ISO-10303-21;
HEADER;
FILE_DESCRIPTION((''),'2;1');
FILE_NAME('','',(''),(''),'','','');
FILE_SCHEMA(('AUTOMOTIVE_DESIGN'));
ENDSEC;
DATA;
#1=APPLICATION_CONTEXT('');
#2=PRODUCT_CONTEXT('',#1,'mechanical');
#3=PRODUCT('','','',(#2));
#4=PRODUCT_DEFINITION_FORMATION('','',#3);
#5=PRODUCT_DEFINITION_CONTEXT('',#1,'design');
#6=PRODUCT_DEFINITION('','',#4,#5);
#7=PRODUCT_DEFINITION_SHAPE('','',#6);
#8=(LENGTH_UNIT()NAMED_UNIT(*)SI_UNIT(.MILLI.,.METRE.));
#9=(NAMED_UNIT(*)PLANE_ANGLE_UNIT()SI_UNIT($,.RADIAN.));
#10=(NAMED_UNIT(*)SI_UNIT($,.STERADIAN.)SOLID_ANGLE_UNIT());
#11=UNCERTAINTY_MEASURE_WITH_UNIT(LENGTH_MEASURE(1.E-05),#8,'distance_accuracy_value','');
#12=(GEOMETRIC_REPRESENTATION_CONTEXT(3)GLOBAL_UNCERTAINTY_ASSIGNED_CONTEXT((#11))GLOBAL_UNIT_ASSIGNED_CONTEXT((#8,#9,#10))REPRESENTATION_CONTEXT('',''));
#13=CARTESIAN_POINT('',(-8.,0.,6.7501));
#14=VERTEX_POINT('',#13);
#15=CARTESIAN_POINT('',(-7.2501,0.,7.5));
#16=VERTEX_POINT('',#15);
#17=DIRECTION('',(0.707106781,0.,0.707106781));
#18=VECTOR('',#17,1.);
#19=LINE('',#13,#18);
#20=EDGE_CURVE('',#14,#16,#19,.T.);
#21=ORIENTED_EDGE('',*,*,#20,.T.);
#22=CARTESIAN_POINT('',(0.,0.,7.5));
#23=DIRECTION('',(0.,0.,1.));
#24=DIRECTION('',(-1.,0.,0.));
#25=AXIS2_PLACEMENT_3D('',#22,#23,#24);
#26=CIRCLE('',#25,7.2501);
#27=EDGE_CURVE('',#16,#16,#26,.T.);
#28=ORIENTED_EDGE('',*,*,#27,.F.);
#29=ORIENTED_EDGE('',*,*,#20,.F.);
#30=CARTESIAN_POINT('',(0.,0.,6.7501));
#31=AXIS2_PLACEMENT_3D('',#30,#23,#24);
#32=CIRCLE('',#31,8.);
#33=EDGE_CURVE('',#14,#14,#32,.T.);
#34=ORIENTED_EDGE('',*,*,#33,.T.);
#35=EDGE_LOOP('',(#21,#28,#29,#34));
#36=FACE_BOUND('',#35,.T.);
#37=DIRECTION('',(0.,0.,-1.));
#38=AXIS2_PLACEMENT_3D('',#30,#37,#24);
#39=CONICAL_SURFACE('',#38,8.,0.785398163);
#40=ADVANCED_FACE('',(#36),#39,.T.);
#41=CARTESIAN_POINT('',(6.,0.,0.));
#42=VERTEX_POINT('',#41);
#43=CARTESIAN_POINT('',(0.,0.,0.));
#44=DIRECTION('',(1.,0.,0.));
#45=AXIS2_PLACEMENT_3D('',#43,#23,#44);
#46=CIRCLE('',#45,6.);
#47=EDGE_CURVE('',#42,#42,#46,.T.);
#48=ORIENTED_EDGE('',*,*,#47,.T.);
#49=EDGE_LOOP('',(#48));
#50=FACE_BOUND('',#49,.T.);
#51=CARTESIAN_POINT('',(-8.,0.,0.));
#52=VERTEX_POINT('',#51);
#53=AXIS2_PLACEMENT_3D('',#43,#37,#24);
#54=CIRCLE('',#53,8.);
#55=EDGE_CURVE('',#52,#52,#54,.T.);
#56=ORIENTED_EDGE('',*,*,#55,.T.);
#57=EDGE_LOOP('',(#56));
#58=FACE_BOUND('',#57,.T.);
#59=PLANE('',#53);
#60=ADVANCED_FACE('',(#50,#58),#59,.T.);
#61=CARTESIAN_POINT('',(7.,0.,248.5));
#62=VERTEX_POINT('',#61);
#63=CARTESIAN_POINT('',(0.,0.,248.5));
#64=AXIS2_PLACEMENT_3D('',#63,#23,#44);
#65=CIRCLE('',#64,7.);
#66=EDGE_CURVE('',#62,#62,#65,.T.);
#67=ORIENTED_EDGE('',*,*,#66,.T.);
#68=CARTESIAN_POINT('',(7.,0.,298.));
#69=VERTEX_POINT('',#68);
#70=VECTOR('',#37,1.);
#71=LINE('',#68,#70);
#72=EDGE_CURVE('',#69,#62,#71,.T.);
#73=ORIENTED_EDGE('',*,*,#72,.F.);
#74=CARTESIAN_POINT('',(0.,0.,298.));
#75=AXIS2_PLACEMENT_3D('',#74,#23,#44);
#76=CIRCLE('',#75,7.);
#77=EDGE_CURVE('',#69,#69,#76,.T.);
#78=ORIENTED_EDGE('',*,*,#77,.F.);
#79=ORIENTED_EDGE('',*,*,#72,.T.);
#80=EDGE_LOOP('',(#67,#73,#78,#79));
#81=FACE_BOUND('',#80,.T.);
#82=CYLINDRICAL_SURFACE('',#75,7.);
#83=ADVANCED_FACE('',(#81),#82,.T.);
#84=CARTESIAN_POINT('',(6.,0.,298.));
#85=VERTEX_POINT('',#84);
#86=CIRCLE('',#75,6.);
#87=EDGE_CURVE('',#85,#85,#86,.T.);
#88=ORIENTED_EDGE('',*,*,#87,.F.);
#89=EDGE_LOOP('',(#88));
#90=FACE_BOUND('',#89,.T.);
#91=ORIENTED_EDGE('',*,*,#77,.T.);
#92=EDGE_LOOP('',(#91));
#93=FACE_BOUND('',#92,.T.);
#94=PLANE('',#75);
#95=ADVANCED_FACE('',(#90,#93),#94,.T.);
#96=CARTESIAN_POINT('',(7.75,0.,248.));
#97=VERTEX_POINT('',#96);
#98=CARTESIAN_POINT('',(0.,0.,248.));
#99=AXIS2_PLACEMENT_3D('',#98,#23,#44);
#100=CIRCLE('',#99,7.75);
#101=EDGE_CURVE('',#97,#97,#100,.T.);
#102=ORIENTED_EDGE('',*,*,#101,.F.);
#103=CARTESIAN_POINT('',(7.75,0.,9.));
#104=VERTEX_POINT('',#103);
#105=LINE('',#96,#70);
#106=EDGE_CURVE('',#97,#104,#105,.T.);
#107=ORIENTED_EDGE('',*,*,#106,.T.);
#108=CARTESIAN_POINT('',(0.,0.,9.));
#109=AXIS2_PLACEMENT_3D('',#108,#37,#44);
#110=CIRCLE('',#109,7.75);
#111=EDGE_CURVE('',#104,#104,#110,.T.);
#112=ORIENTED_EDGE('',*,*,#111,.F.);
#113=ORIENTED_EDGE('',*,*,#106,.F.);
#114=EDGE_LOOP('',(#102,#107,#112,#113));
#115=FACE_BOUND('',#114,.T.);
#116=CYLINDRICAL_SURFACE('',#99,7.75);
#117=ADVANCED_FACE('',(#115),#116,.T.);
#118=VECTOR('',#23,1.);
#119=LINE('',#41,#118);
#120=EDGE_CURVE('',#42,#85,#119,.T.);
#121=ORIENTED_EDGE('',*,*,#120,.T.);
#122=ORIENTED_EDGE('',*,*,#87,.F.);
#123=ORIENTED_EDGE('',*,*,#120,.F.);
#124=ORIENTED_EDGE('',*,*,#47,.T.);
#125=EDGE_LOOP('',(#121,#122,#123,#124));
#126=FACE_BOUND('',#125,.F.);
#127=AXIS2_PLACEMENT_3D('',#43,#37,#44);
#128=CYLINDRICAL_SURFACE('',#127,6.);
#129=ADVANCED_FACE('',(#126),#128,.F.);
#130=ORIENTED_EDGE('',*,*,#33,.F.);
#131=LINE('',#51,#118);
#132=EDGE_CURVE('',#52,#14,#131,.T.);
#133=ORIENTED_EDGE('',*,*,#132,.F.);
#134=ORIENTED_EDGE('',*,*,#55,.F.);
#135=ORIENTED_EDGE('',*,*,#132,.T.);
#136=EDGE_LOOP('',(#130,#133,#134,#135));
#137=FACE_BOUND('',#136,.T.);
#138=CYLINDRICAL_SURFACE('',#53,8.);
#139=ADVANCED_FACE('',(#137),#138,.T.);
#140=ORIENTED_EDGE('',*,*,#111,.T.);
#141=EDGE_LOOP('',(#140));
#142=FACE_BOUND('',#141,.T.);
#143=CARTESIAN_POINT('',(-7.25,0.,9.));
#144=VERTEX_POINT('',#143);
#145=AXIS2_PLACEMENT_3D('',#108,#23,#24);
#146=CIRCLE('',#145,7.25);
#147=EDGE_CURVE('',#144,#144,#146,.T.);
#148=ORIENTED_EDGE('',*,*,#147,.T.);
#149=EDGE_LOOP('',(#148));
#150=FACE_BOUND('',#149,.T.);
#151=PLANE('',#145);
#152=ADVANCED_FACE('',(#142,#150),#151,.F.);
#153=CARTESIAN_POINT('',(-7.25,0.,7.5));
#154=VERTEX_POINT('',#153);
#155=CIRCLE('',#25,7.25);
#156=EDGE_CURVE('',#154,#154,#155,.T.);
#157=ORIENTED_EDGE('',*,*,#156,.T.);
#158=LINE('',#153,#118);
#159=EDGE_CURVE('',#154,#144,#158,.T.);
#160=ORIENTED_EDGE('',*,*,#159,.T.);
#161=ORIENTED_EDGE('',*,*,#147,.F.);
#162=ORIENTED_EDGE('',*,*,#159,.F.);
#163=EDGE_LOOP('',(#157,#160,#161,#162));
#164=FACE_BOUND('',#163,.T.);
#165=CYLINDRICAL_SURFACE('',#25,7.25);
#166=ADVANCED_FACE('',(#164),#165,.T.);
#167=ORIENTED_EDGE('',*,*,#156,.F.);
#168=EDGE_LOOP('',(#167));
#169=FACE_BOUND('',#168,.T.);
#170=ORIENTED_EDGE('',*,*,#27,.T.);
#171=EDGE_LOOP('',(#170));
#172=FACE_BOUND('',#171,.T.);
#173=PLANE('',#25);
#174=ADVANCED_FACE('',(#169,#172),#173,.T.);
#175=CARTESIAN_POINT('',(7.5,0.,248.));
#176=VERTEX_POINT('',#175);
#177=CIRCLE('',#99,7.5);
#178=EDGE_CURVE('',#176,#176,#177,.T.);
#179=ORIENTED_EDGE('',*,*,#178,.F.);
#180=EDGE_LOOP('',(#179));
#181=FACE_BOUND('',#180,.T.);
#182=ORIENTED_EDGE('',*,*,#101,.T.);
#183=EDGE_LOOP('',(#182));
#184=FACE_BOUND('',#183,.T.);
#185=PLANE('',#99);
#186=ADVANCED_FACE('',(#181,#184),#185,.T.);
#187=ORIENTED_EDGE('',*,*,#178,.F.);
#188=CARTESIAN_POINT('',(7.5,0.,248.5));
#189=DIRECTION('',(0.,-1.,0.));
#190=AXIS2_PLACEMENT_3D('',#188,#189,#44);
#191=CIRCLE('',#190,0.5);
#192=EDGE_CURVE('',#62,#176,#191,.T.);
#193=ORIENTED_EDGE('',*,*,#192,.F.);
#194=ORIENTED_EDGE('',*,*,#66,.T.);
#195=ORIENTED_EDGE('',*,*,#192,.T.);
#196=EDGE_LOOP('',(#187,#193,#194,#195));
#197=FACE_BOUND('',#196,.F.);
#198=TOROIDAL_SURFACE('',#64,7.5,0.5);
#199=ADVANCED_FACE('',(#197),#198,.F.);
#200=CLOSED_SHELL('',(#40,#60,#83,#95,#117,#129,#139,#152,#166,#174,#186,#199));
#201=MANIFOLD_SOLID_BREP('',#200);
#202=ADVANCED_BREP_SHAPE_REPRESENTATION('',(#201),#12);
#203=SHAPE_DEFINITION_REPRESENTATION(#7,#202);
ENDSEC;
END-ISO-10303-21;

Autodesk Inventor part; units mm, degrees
ref_plane "YZ Plane" through (0, 0, 0) normal (1, 0, 0) x (0, 1, 0)
ref_plane "XZ Plane" through (0, 0, 0) normal (0, 1, 0) x (-1, 0, 0)
ref_plane "XY Plane" through (0, 0, 0) normal (0, 0, 1) x (1, 0, 0)
sketch "Skizze1" plane through (0, 0, 0) normal (0, 0, 1) x (1, 0, 0)
  circle A0 centre (0, 0) radius 8
  circle A1 centre (0, 0) radius 6
  dimension "d0" = 2
  dimension "d1" = 16
extrude "Extrusion1" add sketch "Skizze1" along normal blind 298
sketch "Skizze2" plane through (0, 0, 298) normal (0, 0, 1) x (1, 0, 0)
  circle A0 centre (0, 0) radius 8 projected
  circle A1 centre (0, 0) radius 7
  dimension "d4" = 14
extrude "Extrusion2" cut sketch "Skizze2" against normal blind 50
sketch "Skizze3" plane through (0, 0, 248) normal (0, 0, 1) x (1, 0, 0)
  circle A0 centre (0, 0) radius 8 projected
  circle A1 centre (0, 0) radius 7.75
  dimension "d7" = 15.5
extrude "Extrusion3" cut sketch "Skizze3" against normal through all
sketch "Skizze4" plane through (0, 0, 0) normal (0, 0, -1) x (-1, 0, 0)
  circle A0 centre (0, 0) radius 7.75 projected
  circle A1 centre (0, 0) radius 6 projected
  circle A2 centre (0, 0) radius 8
  dimension "d10" = 16
extrude "Extrusion4" add sketch "Skizze4" against normal blind 9 contours A2
sketch "Skizze5" plane through (0, 0, 0) normal (0, 1, 0) x (-1, 0, 0)
  line L0 (-8, 9) -> (8, 9) projected
  line L1 (8, 0) -> (-8, 0) projected
  line L2 (8, 0) -> (8, 9) projected
  line L3 (6, 0) -> (6, 298) projected
  line L4 (7.75, 248) -> (7.75, 9) projected
  line L5 (0, -50) -> (0, 300) projected
  line L6 (8, 7.5) -> (7.25, 7.5)
  line L7 (7.25, 7.5) -> (7.25, 9)
  line L8 (8, 9) -> (7.25, 9)
  line L9 (8, 9) -> (8, 7.5)
  point P0 (0, 0)
  dimension "d17" = 1.5
  dimension "d18" = 14.5
revolve "Umdrehung1" cut sketch "Skizze5" angle 360 about axis through (0, 0, -10) along (0, 0, 1) contours L0 L2 L6 L7
chamfer "Fase1" distance 0.75 angle 45 1 edges at (8, 0, 7.5)
thread "Gewinde3" size "M16x1" class "6g" standard "ANSI Metric M Profile" full length
fillet "Rundung1" radius 0.5 1 edges at (-7, 0, 248)
properties part number "13_0204_023"
